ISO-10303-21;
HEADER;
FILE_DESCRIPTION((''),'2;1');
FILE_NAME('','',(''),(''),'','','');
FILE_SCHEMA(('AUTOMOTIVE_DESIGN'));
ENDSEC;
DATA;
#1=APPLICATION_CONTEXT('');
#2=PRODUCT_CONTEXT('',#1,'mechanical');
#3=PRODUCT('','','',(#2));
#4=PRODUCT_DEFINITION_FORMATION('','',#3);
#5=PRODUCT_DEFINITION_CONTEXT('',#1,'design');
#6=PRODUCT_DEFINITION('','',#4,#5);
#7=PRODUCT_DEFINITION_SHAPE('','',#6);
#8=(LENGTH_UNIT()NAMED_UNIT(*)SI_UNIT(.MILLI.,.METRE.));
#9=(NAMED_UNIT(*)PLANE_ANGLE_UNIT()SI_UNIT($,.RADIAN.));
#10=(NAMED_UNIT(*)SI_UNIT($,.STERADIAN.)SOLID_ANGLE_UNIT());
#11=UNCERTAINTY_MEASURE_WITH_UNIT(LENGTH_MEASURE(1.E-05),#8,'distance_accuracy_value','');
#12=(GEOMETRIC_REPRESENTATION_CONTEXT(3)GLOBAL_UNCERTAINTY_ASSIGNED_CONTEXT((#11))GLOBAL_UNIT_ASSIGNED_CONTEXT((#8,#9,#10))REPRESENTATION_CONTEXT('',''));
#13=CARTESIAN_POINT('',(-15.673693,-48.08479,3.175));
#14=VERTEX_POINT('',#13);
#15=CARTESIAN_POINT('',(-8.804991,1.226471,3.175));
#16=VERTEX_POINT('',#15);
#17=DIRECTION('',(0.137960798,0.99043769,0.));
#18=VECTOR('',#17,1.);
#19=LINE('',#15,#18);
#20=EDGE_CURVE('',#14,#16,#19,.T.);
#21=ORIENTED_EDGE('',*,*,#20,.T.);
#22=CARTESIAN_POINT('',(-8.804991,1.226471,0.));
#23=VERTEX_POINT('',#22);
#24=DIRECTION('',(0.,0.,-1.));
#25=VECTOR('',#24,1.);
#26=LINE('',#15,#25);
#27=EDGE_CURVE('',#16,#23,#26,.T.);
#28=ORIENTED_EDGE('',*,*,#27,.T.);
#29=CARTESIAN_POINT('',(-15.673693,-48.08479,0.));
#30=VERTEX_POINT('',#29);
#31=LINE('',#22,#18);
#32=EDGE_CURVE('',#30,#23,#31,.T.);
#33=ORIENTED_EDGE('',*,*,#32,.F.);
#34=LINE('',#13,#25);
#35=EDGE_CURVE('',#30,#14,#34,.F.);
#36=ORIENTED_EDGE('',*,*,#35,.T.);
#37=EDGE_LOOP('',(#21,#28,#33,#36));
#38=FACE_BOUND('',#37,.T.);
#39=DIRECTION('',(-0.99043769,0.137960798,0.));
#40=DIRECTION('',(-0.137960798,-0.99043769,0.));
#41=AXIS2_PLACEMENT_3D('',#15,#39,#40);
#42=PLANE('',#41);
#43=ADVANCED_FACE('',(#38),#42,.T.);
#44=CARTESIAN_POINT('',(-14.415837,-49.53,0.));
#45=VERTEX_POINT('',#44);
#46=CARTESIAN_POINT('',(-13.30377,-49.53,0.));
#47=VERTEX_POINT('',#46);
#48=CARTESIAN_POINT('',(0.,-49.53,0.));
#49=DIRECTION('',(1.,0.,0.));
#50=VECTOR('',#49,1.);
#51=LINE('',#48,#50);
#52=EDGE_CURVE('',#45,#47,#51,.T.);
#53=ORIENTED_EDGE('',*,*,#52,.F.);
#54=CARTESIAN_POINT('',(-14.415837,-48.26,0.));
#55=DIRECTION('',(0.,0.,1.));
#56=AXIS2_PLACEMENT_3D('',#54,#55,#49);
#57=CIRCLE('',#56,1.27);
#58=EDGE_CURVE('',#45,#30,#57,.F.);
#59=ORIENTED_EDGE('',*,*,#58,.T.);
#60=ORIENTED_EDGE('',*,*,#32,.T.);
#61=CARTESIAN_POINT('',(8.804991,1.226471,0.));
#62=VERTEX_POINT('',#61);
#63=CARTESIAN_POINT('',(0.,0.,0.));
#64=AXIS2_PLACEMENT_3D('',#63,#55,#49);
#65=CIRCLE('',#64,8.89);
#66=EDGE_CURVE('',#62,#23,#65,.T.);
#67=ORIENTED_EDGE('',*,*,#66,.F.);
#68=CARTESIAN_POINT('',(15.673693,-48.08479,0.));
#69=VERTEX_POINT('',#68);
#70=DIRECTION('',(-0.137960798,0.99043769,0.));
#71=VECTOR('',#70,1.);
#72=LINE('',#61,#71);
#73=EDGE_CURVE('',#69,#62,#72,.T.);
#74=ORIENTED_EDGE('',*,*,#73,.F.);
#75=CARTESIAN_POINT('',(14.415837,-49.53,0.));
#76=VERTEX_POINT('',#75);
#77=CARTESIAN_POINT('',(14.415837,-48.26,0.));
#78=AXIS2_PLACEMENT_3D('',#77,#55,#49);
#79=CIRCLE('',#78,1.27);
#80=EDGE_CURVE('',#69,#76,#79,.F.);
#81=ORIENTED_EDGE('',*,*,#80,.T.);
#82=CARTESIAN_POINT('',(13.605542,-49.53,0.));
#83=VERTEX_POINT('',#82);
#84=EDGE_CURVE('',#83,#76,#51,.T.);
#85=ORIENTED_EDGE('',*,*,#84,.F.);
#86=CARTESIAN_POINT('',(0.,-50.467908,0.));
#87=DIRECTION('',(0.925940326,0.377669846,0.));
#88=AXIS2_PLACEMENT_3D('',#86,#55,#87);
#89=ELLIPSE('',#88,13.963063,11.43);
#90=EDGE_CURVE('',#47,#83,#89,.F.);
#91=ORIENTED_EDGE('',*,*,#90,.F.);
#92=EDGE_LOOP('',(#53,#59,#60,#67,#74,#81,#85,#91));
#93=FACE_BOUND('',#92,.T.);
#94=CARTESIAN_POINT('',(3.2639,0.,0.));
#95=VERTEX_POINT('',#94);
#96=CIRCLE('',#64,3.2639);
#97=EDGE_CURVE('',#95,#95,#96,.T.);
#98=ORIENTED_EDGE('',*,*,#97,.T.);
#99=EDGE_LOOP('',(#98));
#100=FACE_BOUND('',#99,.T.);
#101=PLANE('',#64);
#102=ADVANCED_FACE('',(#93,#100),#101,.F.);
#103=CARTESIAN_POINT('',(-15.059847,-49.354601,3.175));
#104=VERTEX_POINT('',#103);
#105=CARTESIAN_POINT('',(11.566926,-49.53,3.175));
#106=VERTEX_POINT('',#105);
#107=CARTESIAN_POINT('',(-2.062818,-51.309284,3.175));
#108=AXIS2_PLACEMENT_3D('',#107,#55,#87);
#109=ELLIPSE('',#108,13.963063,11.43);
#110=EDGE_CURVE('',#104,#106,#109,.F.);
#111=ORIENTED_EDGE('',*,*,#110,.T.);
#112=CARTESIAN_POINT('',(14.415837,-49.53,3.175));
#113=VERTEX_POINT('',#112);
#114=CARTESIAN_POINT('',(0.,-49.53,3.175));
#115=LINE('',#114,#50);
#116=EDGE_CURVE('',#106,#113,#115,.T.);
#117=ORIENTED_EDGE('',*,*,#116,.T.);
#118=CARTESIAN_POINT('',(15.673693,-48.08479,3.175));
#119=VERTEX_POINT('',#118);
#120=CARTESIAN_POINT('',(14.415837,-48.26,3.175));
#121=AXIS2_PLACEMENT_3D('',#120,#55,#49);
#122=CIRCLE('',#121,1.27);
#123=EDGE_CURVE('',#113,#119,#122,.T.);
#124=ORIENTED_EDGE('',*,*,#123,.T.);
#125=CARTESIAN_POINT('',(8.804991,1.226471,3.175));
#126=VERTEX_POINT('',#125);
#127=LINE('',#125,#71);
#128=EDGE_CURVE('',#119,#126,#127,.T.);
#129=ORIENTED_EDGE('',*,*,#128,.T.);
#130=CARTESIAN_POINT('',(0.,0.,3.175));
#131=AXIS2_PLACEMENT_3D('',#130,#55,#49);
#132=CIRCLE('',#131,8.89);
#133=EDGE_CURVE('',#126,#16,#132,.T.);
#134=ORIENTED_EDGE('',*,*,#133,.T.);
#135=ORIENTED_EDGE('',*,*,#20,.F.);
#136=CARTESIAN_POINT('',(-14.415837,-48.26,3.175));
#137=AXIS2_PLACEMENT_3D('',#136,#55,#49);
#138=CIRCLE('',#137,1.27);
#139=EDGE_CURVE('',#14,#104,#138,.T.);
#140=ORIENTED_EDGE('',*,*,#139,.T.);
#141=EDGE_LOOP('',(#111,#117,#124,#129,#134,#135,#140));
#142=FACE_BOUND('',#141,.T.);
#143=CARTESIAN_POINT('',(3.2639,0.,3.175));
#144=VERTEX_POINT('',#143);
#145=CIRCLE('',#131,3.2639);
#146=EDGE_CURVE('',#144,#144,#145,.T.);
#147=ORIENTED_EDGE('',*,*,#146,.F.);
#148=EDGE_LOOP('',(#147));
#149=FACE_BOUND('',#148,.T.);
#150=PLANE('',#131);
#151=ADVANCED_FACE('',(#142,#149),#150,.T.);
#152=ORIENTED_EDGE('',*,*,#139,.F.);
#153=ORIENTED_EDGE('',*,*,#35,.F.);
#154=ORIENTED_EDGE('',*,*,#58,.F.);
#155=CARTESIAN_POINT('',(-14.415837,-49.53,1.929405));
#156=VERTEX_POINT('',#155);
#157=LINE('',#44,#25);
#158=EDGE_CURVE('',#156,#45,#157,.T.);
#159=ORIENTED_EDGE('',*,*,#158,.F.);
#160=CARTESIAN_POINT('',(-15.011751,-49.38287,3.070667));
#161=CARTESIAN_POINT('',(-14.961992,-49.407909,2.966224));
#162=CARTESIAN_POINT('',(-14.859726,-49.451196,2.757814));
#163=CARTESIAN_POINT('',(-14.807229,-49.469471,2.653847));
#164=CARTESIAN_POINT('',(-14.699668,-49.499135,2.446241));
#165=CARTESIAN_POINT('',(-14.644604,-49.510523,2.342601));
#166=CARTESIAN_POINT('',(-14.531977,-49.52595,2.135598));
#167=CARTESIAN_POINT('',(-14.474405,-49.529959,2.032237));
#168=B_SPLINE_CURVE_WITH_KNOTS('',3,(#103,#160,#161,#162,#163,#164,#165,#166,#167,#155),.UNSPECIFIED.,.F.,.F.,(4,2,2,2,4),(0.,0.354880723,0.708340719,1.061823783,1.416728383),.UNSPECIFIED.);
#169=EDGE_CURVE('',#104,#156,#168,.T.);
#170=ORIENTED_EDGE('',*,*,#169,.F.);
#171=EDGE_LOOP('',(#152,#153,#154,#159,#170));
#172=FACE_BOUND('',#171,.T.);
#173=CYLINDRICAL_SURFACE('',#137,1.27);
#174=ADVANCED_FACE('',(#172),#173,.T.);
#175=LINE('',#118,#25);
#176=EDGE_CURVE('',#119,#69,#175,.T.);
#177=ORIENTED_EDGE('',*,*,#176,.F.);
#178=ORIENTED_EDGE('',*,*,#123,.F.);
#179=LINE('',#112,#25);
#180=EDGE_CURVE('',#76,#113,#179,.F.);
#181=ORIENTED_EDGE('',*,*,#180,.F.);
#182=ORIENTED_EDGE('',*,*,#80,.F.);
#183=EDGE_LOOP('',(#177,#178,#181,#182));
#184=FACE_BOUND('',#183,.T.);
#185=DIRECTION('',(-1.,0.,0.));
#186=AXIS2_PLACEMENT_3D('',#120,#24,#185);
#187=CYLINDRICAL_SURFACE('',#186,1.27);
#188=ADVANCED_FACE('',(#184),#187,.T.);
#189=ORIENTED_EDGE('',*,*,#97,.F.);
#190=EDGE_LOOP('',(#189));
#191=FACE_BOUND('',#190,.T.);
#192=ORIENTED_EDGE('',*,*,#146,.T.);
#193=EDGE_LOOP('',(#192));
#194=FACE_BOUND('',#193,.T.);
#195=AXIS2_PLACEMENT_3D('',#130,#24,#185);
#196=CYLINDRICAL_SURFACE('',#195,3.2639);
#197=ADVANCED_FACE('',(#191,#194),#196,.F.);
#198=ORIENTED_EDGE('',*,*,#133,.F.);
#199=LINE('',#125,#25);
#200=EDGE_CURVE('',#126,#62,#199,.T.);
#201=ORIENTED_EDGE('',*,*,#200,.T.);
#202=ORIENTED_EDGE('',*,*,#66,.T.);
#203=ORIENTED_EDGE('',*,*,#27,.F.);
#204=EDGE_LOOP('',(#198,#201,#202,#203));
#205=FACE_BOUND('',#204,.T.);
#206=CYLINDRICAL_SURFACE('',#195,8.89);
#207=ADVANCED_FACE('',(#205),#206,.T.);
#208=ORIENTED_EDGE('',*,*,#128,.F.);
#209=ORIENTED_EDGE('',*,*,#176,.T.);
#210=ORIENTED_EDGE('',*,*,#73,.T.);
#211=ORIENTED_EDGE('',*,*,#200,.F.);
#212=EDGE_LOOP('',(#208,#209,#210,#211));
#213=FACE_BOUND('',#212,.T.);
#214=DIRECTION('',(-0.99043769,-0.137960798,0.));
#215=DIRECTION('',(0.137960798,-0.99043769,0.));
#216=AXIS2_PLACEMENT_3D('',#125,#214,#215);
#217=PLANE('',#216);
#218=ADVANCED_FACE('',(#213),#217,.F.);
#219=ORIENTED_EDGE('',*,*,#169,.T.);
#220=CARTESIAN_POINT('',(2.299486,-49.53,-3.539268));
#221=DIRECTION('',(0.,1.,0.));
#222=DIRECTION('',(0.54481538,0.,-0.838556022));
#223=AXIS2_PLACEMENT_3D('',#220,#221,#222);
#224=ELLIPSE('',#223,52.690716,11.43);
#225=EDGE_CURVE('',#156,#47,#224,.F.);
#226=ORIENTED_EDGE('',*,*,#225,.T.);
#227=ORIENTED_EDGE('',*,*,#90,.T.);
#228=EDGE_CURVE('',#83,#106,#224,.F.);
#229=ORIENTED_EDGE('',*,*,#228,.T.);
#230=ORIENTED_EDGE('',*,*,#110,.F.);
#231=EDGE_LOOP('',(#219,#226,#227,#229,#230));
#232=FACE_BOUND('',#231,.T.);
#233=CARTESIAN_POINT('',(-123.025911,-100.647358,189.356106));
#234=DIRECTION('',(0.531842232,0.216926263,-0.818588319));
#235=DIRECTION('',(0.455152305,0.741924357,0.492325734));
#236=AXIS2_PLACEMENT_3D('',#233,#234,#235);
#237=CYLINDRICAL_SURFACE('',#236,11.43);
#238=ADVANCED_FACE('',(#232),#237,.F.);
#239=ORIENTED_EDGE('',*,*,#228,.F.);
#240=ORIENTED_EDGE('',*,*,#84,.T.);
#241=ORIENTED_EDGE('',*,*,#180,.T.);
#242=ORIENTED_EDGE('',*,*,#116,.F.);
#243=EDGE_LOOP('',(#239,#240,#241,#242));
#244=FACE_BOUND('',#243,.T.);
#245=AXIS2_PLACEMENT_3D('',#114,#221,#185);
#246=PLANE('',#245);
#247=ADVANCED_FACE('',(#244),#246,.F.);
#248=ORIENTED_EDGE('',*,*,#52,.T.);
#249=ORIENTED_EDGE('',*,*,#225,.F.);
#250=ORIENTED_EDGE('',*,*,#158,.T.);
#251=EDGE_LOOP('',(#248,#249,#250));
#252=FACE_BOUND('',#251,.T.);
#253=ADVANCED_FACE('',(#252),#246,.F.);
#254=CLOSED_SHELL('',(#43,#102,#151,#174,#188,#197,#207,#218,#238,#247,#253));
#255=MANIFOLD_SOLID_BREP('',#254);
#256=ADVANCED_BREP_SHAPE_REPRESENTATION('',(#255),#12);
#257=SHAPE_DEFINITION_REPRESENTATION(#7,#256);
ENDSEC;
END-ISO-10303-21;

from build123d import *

# Parameters (mm, degrees)
SKETCH1_R           = 3.2639
BOSS_EXTRUDE1_DEPTH = 3.175
CAVITY1_OUTLINE_W   = 11.43
CAVITY1_OUTLINE_H   = 18.479477922
FILLET2_R           = 1.27


# Read off the part's stored shape, not the designer's step: Cavity1
with BuildPart() as part:
    # Sketch1 → Boss-Extrude1 (new body)
    with BuildSketch(Plane.XY):
        with BuildLine():
            ThreePointArc((8.804991066, 1.226471495), (0, 8.89), (-8.804991066, 1.226471495))
            Line((-8.804991066, 1.226471495), (-15.875, -49.53))
            Line((-15.875, -49.53), (15.875, -49.53))
            Line((15.875, -49.53), (8.804991066, 1.226471495))
        make_face()
        Circle(SKETCH1_R, mode=Mode.SUBTRACT)
    extrude(amount=BOSS_EXTRUDE1_DEPTH)

    # Cavity1 outline → Cavity1 (revolve, cut)
    with BuildSketch(Plane(origin=(5.822510153, -48.093039184, -8.961753145), x_dir=(0.8468434564524782, -0.1362359794546486, 0.5140971874710584), z_dir=(0, 0.9666347575686124, 0.2561586333900735))):
        with Locations((5.715, -12.145132975)):
            Rectangle(CAVITY1_OUTLINE_W, CAVITY1_OUTLINE_H)
    revolve(axis=Axis((5.822510153, -48.093039184, -8.961753145), (0.5318422324934529, 0.21692626250019303, -0.818588319226507)), mode=Mode.SUBTRACT)

    # Fillet2
    # the kernel refuses this fillet: 1.27 mm, written as the material it takes off along each edge
    with BuildSketch(Plane(origin=(-15.875, -49.53, -3.64790796), x_dir=(0.13796079814219978, 0.990437690203663, 0), z_dir=(0, 0, 1))) as fillet2_piece_1:
        with BuildLine():
            CenterArc((FILLET2_R * 1.14894738902, -FILLET2_R), FILLET2_R, 90, 97.929863559)
            Line((FILLET2_R * 0.158509698812, -FILLET2_R * 1.13796079814), (0, 0))
            Line((0, 0), (FILLET2_R * 1.14894738902, 0))
        make_face()
    extrude(amount=10.47081592, mode=Mode.SUBTRACT)
    with BuildSketch(Plane(origin=(15.875, -49.53, -3.64790796), x_dir=(-0.1379607981421991, 0.9904376902036632, 0), z_dir=(0, 0, 1))) as fillet2_piece_2:
        with BuildLine():
            CenterArc((FILLET2_R * 1.14894738902, FILLET2_R), FILLET2_R, 172.070136441, 97.929863559)
            Line((FILLET2_R * 0.158509698812, FILLET2_R * 1.13796079814), (0, 0))
            Line((0, 0), (FILLET2_R * 1.14894738902, 0))
        make_face()
    extrude(amount=10.47081592, mode=Mode.SUBTRACT)


solid = part.part
